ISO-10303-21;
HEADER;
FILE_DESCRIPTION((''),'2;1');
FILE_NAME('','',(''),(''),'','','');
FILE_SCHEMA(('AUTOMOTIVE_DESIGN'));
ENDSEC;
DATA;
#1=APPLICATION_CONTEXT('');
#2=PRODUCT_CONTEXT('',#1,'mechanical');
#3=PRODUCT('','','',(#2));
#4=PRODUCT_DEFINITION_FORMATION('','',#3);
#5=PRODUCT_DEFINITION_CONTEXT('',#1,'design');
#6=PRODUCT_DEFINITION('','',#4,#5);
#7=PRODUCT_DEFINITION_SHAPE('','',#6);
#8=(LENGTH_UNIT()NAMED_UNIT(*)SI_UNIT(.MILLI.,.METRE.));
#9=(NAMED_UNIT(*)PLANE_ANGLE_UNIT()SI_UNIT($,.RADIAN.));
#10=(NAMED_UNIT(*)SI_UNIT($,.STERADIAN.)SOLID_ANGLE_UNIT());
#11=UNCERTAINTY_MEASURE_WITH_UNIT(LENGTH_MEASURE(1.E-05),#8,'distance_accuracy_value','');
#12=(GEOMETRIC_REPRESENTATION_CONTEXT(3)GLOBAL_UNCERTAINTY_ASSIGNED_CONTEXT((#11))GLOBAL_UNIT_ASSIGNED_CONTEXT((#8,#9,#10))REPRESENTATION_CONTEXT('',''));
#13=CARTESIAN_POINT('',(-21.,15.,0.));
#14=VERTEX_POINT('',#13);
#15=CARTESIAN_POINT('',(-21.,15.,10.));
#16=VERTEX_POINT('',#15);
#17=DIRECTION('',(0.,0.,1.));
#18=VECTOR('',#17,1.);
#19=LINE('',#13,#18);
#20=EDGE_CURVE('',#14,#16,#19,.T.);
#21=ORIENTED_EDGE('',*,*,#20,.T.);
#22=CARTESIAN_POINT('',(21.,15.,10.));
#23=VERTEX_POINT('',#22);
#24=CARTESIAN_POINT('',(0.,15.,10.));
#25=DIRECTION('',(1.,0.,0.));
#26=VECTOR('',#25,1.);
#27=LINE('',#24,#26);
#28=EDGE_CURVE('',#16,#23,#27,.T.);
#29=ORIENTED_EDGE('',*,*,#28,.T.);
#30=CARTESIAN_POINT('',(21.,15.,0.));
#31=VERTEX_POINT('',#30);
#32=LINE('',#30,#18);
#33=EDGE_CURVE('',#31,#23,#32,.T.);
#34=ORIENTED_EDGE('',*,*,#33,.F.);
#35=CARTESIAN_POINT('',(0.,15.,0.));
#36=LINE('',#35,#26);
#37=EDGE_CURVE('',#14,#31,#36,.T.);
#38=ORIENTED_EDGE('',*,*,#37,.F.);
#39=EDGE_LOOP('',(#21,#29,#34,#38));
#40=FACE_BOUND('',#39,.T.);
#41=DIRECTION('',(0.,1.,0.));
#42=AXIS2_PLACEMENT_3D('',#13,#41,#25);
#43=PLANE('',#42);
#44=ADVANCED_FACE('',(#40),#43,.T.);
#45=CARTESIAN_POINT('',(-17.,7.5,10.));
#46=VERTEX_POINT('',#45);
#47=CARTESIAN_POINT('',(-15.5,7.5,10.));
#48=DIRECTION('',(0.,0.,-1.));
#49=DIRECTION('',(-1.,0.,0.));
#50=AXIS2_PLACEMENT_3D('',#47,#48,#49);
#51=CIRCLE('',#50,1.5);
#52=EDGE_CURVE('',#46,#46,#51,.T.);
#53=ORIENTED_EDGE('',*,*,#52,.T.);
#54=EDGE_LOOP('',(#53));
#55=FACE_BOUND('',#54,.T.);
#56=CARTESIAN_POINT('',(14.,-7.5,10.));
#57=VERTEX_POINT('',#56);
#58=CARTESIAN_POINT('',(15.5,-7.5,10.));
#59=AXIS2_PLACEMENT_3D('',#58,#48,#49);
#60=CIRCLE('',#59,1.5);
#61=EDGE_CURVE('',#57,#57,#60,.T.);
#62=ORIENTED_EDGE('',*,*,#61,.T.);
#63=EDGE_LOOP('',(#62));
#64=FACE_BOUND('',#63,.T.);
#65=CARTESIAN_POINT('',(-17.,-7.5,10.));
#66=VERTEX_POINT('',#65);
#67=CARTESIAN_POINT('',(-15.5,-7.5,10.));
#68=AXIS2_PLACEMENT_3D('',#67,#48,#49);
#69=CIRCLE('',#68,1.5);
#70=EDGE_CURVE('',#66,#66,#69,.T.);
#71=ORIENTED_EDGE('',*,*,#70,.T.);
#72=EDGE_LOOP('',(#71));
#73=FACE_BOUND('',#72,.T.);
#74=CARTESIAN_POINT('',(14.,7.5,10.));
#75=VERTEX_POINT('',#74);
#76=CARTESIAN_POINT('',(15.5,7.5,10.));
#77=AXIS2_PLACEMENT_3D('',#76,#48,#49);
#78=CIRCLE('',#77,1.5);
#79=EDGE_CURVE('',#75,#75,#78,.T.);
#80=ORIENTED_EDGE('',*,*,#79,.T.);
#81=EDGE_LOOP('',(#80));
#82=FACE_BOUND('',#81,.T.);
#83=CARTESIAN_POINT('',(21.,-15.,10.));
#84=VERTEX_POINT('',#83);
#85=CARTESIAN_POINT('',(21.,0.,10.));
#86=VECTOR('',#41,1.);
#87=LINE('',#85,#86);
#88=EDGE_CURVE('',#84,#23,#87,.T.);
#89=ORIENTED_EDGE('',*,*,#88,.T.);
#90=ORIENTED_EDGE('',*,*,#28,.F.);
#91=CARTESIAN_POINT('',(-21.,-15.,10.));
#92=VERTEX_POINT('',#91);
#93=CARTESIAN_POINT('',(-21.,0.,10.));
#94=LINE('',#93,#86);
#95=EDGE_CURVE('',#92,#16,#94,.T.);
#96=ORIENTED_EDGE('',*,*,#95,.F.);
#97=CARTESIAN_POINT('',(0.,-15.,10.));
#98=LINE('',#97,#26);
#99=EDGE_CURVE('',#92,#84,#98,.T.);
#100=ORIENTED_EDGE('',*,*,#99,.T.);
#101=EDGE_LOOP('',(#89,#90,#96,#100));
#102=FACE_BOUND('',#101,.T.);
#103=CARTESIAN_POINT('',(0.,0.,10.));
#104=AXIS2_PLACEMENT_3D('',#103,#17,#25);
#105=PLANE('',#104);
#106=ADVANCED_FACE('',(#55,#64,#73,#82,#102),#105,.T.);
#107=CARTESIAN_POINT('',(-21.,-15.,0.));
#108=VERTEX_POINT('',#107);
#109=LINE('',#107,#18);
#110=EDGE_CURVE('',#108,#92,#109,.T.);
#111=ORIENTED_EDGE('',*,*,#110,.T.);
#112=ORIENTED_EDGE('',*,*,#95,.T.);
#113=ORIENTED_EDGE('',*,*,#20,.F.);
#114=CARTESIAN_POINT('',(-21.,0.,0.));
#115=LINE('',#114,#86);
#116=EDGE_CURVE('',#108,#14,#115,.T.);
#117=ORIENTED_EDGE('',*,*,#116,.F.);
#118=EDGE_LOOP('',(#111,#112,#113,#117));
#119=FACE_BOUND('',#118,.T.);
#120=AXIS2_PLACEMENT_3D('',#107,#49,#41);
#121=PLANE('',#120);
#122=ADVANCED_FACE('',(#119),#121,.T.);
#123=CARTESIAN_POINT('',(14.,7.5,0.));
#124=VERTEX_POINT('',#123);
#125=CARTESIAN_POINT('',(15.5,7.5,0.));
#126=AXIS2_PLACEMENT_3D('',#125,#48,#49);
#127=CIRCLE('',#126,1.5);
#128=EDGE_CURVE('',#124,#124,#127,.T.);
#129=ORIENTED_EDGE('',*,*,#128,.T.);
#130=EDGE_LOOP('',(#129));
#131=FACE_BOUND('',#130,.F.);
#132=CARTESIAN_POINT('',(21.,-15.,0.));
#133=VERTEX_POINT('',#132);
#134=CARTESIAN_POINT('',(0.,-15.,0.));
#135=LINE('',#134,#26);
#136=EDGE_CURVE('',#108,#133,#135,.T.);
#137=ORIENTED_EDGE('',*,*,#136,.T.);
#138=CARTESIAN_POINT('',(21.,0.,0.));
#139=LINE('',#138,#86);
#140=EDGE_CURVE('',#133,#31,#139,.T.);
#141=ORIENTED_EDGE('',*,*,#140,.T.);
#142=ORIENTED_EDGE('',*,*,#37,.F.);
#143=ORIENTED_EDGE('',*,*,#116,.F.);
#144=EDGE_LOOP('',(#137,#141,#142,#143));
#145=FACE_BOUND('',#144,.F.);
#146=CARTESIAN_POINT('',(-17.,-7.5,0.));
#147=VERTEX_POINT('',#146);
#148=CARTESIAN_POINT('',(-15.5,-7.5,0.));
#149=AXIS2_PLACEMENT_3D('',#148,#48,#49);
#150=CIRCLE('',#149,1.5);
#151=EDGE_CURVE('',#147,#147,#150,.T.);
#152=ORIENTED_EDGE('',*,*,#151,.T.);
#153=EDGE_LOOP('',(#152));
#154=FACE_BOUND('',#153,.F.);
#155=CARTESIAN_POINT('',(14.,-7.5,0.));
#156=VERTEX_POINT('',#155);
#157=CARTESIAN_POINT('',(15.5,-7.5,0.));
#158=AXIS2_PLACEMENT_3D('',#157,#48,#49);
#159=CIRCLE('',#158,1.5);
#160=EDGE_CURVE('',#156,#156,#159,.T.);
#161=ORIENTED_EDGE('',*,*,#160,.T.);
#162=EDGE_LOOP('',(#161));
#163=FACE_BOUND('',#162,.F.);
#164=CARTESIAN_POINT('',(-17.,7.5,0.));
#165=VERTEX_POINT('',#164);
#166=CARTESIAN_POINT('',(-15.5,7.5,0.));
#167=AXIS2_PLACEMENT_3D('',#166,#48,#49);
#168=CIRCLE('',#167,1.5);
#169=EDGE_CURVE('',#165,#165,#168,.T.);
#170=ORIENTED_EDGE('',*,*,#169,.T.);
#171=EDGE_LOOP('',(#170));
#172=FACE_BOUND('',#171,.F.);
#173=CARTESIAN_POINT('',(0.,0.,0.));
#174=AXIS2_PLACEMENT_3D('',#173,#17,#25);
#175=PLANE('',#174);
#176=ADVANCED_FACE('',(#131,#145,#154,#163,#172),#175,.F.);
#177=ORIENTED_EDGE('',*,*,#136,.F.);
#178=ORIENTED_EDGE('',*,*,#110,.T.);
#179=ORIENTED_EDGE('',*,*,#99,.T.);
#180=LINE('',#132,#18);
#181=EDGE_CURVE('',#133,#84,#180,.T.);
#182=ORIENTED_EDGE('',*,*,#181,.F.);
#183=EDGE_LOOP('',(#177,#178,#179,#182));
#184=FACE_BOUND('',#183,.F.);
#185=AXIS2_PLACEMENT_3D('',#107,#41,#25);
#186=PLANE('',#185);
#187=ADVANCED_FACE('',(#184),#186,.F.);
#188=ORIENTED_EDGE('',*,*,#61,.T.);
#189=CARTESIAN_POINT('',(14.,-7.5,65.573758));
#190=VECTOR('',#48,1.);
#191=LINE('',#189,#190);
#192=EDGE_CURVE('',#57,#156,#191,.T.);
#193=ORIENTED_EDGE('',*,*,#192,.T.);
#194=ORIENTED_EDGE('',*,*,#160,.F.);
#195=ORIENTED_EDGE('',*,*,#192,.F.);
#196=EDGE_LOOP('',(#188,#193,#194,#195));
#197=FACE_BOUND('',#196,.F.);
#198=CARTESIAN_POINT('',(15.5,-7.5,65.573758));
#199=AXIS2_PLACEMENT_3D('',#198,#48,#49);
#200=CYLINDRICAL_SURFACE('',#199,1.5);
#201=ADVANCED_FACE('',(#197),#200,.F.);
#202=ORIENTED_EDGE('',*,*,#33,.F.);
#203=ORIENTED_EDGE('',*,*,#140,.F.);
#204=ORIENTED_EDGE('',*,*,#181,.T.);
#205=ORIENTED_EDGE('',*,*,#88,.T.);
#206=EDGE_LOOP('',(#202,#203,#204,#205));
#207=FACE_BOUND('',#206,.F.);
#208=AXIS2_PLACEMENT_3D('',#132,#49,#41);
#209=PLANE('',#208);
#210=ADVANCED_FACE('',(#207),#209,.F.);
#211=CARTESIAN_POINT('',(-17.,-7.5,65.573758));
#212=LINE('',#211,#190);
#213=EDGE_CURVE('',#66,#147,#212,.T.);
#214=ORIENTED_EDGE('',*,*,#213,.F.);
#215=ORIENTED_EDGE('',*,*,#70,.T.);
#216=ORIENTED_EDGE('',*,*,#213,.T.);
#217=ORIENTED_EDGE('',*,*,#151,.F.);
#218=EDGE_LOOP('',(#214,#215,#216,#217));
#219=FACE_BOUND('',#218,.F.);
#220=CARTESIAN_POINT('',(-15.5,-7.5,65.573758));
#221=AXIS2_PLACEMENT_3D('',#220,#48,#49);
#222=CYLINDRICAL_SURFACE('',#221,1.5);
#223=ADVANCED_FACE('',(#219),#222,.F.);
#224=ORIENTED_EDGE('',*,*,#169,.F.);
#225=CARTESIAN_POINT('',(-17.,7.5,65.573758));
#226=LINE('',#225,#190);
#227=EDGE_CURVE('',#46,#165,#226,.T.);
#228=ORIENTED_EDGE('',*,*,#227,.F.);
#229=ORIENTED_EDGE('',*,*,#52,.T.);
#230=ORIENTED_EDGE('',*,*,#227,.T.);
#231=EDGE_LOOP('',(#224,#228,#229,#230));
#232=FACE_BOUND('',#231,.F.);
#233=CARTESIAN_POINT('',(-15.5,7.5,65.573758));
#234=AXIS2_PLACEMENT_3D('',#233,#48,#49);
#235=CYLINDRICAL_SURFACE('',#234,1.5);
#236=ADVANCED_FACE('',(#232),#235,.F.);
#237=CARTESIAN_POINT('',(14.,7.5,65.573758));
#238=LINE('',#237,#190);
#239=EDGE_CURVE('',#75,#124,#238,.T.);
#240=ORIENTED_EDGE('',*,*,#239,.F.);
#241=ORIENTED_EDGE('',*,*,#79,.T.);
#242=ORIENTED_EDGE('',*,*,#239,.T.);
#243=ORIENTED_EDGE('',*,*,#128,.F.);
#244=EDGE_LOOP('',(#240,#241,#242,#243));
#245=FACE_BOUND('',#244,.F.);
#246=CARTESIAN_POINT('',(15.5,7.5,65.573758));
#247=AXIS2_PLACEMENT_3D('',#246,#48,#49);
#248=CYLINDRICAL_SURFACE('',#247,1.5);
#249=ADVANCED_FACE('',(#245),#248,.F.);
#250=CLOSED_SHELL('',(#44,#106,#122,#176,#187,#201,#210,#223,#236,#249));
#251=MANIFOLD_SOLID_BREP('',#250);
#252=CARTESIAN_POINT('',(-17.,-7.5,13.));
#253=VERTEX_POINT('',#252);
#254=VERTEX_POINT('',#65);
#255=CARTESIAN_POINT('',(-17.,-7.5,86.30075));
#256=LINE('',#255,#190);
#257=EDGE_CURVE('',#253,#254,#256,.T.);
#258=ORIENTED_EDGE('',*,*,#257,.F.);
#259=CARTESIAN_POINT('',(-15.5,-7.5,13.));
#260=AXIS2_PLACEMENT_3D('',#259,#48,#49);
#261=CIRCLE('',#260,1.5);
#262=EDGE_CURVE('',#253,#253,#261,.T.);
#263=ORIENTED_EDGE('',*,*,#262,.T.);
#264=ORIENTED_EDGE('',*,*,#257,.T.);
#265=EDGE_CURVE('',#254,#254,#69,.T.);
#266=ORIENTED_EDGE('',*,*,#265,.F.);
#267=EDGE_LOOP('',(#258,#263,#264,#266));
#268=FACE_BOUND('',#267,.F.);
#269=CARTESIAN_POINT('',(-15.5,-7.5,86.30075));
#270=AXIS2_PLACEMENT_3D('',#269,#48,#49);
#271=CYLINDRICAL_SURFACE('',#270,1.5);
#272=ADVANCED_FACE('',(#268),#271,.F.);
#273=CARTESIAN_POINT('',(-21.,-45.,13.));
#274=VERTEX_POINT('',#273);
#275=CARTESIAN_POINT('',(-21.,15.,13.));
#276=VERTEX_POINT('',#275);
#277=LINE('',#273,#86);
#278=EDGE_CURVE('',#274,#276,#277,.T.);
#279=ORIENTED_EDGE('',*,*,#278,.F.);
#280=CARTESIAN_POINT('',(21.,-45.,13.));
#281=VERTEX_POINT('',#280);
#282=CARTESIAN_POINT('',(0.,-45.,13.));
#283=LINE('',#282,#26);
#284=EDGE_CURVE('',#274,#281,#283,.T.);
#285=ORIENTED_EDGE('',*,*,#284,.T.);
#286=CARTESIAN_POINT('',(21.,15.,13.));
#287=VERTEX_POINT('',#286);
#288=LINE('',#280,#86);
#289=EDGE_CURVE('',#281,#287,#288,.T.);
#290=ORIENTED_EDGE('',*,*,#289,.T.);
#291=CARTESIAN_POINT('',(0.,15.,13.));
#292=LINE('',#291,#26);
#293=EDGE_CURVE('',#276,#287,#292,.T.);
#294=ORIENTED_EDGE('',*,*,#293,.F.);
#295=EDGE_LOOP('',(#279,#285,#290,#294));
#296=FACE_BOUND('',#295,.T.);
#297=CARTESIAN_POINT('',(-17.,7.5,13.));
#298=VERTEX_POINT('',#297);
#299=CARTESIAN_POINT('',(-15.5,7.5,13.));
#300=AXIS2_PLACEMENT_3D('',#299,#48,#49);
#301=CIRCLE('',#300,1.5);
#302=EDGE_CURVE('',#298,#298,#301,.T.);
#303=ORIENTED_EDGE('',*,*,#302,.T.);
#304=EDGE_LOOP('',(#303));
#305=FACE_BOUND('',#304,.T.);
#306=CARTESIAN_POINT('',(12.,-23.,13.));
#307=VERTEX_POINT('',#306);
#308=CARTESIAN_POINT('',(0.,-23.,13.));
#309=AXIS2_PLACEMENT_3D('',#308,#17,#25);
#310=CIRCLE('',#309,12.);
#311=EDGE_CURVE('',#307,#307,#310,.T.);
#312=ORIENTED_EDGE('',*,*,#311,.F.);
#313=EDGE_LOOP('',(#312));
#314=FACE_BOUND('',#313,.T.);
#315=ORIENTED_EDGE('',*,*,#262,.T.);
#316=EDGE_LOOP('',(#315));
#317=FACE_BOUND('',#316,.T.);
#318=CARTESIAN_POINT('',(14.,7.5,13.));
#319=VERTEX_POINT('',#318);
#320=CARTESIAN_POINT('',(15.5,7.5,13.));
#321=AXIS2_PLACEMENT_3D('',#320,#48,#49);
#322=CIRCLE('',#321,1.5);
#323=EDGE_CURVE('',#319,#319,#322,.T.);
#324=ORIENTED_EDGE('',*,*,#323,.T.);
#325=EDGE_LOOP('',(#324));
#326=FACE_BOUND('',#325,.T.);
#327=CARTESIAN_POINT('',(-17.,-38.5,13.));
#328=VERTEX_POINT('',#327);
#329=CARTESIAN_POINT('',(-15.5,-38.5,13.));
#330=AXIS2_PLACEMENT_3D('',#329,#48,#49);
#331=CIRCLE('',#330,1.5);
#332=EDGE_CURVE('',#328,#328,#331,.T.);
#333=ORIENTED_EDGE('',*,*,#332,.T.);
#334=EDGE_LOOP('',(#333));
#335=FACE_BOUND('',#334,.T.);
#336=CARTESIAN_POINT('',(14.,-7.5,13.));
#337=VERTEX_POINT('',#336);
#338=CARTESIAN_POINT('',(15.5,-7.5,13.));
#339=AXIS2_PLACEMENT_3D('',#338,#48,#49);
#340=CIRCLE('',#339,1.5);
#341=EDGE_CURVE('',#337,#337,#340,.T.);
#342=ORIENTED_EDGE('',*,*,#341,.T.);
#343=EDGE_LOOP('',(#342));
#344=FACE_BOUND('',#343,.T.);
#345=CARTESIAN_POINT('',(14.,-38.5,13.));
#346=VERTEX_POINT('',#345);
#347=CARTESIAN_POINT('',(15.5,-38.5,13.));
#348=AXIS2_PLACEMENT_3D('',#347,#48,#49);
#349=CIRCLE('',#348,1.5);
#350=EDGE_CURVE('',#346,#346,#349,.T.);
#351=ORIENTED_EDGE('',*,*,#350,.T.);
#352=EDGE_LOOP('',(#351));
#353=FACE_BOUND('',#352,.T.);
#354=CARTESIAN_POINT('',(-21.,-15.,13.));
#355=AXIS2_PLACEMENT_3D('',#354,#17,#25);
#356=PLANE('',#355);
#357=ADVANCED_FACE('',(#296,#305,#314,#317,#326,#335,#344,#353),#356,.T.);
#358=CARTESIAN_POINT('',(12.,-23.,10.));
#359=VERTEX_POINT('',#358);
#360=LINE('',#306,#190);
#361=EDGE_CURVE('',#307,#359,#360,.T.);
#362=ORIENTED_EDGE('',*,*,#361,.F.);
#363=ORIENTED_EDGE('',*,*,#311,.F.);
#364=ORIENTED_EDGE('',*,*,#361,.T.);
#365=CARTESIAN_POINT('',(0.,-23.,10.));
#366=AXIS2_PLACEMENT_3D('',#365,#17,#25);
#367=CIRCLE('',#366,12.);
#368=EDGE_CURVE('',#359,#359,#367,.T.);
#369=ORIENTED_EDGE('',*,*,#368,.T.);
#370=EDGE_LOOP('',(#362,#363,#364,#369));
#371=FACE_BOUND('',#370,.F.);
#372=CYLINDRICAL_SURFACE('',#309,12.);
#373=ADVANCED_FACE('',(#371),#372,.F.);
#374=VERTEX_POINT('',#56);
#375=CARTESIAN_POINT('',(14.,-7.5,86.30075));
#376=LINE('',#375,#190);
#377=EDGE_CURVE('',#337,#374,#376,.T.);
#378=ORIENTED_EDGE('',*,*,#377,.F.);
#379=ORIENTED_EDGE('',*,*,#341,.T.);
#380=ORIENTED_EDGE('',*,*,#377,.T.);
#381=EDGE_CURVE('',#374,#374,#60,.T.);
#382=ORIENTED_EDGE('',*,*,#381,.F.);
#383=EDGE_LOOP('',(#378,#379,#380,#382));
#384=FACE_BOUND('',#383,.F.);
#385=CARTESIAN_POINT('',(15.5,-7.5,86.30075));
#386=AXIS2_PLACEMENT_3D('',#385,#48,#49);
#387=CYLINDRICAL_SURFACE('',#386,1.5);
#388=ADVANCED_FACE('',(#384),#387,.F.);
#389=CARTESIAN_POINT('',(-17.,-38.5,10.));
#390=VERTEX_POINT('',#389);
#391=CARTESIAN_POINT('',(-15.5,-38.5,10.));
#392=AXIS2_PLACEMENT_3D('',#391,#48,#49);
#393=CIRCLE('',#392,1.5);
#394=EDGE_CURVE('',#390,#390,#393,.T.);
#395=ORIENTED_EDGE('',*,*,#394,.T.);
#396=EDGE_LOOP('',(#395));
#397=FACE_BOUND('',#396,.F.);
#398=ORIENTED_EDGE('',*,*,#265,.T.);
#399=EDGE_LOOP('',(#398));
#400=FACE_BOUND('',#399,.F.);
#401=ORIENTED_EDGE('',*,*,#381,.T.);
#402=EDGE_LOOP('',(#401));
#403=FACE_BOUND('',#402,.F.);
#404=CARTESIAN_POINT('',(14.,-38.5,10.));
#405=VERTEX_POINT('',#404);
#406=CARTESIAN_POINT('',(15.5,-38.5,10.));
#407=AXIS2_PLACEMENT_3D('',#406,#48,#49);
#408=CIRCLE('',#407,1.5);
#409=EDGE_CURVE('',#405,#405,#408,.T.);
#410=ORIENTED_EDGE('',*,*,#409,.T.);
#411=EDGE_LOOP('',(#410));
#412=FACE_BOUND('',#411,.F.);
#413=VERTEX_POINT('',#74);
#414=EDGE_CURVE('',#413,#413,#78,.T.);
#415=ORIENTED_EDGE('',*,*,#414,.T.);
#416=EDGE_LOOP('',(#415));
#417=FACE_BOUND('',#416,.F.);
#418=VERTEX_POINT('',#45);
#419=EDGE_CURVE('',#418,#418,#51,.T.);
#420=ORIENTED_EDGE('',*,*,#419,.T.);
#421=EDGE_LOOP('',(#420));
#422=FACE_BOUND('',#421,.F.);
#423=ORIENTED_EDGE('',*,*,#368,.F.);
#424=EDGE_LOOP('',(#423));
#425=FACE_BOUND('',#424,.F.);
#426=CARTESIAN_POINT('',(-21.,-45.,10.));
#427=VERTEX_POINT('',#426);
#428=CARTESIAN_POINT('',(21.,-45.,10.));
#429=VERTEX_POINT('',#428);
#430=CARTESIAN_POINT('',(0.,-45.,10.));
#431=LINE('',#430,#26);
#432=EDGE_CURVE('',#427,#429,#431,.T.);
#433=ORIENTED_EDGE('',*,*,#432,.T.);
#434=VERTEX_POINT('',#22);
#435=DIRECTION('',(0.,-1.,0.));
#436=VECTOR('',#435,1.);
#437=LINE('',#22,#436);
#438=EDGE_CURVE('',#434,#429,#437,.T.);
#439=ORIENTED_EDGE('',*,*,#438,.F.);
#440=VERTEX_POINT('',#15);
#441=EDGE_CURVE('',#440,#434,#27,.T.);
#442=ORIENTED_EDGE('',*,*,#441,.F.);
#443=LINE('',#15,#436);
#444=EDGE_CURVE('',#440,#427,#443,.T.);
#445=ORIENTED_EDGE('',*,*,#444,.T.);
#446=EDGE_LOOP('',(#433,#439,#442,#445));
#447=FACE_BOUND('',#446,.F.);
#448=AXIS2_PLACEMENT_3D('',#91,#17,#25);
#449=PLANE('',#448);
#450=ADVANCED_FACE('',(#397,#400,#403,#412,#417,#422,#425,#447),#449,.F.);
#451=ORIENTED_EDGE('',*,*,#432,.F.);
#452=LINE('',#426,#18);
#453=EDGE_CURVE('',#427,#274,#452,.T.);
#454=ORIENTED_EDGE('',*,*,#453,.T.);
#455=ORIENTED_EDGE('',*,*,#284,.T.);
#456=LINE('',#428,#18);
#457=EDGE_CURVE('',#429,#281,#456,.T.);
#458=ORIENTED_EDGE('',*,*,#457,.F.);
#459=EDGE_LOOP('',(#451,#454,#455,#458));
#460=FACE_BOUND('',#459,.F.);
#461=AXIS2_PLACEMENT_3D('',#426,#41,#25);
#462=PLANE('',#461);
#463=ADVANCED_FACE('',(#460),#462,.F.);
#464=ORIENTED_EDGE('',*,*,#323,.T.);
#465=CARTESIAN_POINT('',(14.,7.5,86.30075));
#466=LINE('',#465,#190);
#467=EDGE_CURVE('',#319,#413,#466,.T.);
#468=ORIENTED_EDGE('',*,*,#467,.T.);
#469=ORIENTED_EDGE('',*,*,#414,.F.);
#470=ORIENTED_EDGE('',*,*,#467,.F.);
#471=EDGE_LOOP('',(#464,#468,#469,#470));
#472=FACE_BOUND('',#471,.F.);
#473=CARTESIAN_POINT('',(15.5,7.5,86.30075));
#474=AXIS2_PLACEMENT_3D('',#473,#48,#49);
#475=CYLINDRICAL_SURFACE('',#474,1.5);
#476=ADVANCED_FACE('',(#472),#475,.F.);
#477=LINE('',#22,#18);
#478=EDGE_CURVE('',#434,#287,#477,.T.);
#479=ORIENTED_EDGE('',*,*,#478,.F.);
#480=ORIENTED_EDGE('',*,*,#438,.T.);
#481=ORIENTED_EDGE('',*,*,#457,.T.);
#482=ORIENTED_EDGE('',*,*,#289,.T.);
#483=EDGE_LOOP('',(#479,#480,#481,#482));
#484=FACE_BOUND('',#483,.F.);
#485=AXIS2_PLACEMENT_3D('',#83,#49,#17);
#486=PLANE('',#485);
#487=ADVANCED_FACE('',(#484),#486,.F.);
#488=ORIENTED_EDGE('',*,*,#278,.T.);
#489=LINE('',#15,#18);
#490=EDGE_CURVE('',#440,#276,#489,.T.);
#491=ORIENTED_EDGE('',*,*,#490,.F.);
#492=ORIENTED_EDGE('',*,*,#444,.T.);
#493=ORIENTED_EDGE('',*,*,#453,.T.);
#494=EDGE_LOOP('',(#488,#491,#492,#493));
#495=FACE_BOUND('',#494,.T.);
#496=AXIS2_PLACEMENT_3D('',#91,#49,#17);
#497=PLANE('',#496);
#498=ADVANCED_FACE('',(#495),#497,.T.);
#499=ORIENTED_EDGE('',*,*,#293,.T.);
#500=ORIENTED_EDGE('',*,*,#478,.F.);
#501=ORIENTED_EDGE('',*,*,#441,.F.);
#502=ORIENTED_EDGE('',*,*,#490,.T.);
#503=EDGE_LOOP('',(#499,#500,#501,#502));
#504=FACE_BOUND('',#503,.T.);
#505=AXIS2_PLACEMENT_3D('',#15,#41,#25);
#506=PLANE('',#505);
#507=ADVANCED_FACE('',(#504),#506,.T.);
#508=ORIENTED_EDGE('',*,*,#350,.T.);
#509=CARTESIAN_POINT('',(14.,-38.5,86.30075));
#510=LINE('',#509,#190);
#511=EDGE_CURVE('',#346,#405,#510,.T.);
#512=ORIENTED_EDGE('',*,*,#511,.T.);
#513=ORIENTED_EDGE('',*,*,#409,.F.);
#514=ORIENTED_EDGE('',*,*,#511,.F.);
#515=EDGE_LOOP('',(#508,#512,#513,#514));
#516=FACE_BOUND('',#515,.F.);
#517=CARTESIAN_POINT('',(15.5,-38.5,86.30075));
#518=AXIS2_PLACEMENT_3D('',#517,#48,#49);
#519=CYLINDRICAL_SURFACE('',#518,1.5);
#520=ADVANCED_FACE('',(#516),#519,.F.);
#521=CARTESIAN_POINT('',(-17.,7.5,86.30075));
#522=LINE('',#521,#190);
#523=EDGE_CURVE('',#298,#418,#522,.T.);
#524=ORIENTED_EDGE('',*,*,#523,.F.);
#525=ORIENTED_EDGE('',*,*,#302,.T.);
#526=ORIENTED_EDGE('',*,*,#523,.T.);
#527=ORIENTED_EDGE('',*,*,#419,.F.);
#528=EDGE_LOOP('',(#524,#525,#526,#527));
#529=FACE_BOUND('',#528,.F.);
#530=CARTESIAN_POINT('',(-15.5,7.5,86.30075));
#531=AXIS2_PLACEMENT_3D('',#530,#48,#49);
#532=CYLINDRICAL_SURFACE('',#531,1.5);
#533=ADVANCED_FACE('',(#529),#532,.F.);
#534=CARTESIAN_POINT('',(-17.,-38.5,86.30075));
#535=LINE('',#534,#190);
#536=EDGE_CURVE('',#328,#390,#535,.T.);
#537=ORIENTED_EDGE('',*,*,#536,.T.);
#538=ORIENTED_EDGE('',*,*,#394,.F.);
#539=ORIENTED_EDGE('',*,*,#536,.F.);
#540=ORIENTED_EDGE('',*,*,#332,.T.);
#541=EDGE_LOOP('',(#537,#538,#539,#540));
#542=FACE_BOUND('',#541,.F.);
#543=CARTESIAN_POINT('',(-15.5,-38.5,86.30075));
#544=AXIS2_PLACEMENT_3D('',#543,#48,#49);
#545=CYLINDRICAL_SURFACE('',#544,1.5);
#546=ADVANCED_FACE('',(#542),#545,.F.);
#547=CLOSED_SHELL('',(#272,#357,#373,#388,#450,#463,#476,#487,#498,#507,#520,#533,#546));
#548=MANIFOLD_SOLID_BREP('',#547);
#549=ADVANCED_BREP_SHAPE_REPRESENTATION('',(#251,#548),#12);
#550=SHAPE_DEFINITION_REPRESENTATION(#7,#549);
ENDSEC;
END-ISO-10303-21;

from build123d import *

# Parameters (mm, degrees)
F0_W     = 42
F0_H     = 30
F1_DEPTH = 10
F2_DEPTH = 3
F3_DEPTH = 30
F5_D     = 3
F5_2_D   = 3
F4_R     = 12
F6_DEPTH = 25


with BuildPart() as f1:
    # F0 (on Top) → F1 (new body)
    with BuildSketch(Plane.XY):
        Rectangle(F0_W, F0_H)
    extrude(amount=F1_DEPTH)


with BuildPart() as f2:
    # F2 (new): a face of the model
    f2_faces = [f1.part.faces().sort_by_distance(p)[0] for p in [
        (0, 0, 10),
    ]]
    extrude(f2_faces, amount=F2_DEPTH)

    # F3 (add): a face of the model
    f3_faces = [f2.faces().sort_by_distance(p)[0] for p in [
        (0, -15, 11.5),
    ]]
    extrude(f3_faces, amount=F3_DEPTH)

    # F5#2 (through all)
    with Locations(Plane.XY.offset(13)):
        with Locations((-15.5, -7.5), (-15.5, 7.5), (15.5, 7.5), (15.5, -7.5), (15.5, -38.5), (-15.5, -38.5)):
            Hole(F5_2_D / 2)

    # F4 (on face) → F6 (cut)
    with BuildSketch(Plane.XY.offset(13)):
        with Locations((0, -23)):
            Circle(F4_R)
    extrude(amount=-F6_DEPTH, mode=Mode.SUBTRACT)


with BuildPart() as f1_1:
    add(f1.part)

    # F5 (through all)
    with Locations(Plane.XY.offset(13)):
        with Locations((-15.5, -7.5), (-15.5, 7.5), (15.5, 7.5), (15.5, -7.5), (15.5, -38.5), (-15.5, -38.5)):
            Hole(F5_D / 2)


solid = Compound([f2.part, f1_1.part])
